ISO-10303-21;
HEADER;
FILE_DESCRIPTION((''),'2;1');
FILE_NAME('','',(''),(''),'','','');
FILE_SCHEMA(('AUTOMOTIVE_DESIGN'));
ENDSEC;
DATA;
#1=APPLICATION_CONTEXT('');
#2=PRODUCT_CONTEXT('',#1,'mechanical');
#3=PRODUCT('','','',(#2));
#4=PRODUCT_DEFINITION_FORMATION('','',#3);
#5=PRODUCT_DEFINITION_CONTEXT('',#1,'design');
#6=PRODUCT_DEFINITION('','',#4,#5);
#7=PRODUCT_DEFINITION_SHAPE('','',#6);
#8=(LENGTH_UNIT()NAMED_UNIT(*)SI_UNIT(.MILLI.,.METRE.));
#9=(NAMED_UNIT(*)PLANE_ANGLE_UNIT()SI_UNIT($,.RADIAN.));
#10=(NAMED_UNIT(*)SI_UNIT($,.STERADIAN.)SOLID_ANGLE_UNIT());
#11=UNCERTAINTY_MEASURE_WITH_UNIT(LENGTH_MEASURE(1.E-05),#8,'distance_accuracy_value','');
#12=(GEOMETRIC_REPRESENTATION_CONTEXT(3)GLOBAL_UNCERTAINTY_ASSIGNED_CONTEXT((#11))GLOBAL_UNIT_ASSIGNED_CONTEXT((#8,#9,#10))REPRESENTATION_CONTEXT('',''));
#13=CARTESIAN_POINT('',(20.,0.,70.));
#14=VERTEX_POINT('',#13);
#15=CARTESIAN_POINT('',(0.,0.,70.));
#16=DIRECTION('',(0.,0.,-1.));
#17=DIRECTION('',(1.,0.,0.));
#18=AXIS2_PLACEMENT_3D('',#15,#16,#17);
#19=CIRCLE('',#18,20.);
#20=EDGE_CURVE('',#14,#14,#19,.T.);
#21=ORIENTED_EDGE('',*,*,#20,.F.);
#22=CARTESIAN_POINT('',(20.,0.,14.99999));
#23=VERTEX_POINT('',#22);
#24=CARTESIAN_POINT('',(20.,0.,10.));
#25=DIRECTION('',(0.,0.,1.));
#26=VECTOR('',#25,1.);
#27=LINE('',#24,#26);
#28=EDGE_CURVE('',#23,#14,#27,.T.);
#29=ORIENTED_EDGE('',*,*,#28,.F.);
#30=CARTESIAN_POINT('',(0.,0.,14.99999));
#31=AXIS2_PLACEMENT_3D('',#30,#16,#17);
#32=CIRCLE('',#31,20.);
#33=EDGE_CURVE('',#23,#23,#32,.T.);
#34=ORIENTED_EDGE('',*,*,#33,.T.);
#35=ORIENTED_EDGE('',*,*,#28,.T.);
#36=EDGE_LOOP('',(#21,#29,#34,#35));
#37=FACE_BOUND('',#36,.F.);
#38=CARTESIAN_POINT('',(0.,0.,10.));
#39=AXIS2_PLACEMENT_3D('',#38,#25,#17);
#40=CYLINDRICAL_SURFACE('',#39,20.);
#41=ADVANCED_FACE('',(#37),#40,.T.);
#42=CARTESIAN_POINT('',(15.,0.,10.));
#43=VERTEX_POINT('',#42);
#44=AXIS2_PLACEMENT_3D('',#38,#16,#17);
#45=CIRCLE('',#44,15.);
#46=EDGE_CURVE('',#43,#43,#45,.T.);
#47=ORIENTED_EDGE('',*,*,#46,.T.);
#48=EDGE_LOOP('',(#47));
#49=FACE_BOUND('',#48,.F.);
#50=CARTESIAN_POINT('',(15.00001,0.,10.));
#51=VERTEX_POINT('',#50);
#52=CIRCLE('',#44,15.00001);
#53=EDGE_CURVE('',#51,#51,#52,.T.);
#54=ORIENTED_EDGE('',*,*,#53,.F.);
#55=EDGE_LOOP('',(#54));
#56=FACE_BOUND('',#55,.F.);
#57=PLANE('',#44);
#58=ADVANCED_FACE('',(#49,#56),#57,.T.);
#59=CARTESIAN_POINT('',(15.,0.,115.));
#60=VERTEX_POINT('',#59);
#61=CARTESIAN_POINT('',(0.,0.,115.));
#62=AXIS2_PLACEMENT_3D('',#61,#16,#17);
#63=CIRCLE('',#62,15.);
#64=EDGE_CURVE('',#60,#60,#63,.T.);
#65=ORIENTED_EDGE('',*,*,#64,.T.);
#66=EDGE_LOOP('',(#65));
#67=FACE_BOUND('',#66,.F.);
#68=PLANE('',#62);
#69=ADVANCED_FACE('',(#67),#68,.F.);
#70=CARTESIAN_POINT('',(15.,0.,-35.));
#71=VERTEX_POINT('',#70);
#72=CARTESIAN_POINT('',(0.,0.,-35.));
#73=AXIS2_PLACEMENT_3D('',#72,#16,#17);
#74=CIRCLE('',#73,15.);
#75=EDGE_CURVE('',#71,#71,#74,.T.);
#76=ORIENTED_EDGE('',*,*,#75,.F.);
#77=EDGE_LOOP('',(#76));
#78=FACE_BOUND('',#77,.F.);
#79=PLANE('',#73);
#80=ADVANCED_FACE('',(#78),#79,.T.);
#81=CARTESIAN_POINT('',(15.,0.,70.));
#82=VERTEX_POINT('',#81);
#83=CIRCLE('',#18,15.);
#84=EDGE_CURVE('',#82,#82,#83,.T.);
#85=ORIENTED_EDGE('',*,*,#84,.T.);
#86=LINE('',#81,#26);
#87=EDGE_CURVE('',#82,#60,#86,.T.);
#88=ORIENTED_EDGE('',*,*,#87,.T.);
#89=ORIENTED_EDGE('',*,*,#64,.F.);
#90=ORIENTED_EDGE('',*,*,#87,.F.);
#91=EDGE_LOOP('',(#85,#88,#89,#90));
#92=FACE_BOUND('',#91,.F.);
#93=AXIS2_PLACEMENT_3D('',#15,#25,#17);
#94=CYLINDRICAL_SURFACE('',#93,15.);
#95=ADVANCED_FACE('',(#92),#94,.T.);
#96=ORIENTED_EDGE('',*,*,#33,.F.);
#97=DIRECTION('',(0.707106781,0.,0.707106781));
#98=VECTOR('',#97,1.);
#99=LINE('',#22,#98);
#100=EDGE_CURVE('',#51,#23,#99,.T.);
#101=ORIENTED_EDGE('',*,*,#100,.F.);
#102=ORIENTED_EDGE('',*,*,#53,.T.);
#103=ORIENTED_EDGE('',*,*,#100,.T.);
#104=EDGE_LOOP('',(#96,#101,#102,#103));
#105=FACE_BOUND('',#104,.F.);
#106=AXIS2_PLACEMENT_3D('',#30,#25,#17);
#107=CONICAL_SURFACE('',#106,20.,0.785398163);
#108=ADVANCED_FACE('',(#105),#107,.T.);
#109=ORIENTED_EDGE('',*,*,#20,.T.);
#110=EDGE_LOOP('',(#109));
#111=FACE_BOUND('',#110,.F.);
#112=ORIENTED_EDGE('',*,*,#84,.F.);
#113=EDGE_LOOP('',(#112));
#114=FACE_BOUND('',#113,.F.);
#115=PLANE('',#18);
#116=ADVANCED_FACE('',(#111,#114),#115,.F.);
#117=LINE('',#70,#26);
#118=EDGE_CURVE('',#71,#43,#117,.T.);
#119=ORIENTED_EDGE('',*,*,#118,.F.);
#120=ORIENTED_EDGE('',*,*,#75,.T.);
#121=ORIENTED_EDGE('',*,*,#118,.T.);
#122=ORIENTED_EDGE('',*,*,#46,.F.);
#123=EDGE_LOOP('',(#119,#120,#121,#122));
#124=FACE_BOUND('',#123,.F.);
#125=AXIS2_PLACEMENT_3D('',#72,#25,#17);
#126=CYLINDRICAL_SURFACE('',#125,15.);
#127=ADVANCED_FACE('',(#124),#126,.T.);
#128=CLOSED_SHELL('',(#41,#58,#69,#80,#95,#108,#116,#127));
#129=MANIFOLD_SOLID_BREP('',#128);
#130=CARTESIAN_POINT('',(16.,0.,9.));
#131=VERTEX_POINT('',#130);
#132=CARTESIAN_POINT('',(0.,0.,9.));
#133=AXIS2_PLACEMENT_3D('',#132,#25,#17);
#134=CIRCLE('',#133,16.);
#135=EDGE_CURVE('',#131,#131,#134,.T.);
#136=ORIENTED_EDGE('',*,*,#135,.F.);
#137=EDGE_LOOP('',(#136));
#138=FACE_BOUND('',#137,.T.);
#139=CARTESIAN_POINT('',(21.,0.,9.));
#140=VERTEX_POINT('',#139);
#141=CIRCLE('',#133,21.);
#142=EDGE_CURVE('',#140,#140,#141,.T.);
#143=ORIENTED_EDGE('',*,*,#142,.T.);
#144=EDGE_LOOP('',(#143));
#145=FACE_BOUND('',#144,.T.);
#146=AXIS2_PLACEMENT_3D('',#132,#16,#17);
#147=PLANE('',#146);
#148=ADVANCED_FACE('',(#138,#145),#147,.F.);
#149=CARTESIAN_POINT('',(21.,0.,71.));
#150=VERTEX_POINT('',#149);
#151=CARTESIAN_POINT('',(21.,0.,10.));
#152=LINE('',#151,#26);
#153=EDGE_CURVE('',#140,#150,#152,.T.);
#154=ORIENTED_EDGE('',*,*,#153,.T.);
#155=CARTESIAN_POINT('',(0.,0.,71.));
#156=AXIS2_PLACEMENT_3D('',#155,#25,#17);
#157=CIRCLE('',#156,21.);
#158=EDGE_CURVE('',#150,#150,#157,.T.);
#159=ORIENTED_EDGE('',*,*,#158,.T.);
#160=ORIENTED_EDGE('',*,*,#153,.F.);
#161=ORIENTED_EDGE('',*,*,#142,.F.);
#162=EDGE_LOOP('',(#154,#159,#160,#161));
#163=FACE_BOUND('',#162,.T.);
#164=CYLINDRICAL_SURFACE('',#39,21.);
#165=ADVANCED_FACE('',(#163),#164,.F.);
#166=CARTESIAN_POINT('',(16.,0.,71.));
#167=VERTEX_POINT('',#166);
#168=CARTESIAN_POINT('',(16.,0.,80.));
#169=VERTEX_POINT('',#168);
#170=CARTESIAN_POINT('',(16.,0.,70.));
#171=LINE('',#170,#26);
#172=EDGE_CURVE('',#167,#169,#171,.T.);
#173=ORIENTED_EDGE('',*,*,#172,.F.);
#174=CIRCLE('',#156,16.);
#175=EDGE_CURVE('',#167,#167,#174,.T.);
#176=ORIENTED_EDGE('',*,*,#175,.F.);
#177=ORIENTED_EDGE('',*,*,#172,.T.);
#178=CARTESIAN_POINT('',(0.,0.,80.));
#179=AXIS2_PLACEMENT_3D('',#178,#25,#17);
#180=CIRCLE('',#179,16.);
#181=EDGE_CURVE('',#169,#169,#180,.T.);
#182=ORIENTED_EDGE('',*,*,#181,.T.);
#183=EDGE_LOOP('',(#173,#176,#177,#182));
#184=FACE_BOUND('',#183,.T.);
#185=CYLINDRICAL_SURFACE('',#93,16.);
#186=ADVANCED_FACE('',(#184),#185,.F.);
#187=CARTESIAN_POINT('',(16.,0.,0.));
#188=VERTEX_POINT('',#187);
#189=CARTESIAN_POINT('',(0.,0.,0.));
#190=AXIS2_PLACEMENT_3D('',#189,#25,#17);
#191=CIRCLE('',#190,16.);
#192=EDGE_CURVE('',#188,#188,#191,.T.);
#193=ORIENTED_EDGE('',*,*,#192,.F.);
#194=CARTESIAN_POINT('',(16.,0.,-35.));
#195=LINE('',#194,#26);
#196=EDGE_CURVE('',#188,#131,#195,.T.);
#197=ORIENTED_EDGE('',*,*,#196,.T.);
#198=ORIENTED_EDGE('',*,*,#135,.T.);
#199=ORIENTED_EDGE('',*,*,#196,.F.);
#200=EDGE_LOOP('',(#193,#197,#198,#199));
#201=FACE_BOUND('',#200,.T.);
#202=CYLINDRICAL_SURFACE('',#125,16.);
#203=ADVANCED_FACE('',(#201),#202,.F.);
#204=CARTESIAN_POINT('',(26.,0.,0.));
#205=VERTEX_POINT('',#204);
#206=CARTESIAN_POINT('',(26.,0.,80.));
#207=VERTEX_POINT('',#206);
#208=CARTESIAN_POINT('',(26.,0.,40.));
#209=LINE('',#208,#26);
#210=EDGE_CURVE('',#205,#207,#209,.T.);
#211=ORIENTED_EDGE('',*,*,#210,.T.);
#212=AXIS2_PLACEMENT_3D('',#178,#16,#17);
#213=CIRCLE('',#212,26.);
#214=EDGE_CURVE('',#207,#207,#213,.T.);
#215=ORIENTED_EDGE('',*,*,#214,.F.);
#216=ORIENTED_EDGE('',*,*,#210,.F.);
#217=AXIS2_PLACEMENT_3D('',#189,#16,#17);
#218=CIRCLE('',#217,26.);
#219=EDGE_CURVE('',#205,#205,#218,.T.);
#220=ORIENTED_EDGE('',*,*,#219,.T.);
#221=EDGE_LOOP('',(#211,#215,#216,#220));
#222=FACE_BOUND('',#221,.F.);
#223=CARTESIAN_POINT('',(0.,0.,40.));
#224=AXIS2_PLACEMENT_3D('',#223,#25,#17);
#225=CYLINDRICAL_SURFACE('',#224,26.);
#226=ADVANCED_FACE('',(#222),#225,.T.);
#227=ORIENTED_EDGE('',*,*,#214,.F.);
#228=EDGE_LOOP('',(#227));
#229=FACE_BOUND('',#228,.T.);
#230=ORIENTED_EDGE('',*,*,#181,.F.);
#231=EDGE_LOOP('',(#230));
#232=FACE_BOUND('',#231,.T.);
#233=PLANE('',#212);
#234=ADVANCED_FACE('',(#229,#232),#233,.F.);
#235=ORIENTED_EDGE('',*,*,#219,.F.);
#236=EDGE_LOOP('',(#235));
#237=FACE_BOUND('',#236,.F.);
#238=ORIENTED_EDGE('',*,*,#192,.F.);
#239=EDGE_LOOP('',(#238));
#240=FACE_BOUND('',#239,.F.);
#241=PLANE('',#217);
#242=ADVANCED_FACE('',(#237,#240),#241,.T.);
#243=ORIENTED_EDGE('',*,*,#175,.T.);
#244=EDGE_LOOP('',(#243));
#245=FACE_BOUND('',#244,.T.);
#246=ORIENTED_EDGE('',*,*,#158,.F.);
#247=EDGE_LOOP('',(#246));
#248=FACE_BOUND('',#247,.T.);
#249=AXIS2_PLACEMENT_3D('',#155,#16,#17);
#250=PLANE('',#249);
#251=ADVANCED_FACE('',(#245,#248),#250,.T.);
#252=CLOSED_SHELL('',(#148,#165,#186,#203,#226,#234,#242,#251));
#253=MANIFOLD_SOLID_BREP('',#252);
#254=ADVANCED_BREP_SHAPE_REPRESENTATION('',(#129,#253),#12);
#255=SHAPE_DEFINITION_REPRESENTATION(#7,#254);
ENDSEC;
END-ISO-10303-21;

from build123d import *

# Parameters (mm, degrees)
F0_W      = 26
F0_H      = 80
F1_W      = 15
F1_H      = 35
F4_OFFSET = 1
F5_SIZE   = 4.99999
F7_DEPTH  = 25


# Not quite as in the source:
# - a fillet or chamfer is up to 0.001 mm smaller than in the source, because OpenCascade refuses the exact size
# - a feature of the source that left no trace in its solid (it failed there, or was rolled back) is left out


with BuildPart() as f2:
    # F0 (on Front) → F2 (revolve)
    with BuildSketch(Plane.XZ):
        with Locations((13, 40)):
            Rectangle(F0_W, F0_H)
    revolve(axis=Axis((0, 0, 40), (0, 0, -1)))


with BuildPart() as f3:
    # F1 (on Front) → F3 (revolve)
    with BuildSketch(Plane.XZ):
        Polygon((0, 115), (0, 0), (15, 0), (15, 10), (20, 10), (20, 70), (15, 70), (15, 115), align=None)
        with Locations((7.5, -17.5)):
            Rectangle(F1_W, F1_H)
    revolve(axis=Axis((0, 0, 40), (0, 0, -1)))


with BuildPart() as f2_1:
    add(f2.part)

    # F4: cut F3, made larger all round first
    f4_tool = offset(f3.part, amount=F4_OFFSET, kind=Kind.INTERSECTION, mode=Mode.PRIVATE)
    add(f4_tool, mode=Mode.SUBTRACT)


with BuildPart() as f3_1:
    add(f3.part)

    # F5 (size 5 in the source; OpenCascade refuses exactly that, so slightly less here)
    f5_edges = [f3_1.edges().sort_by_distance(p)[0] for p in [
        (-20, 0, 10),
    ]]
    chamfer(f5_edges, length=F5_SIZE)


with BuildPart() as f7:
    # F6 (on face) → F7 (new body)
    with BuildSketch(Plane.XY.offset(115)):
        with BuildLine():
            ThreePointArc((15, 0), (0, -15), (-15, 0))
            Line((-15, 0), (-28.4320339561, 0))
            Line((-28.4320339561, 0), (-35, -125.1360130745))
            Line((-35, -125.1360130745), (-35, -130))
            Line((-35, -130), (-10, -130))
            Line((-10, -130), (-10, -120))
            Line((-10, -120), (10, -120))
            Line((10, -120), (10, -130))
            Line((10, -130), (35, -130))
            Line((35, -130), (35, -125.1360130745))
            Line((35, -125.1360130745), (28.4320339561, 0))
            Line((28.4320339561, 0), (15, 0))
        make_face()
        with BuildLine():
            Line((15, 0), (0, 0))
            Line((0, 0), (-15, 0))
            ThreePointArc((-15, 0), (0, -15), (15, 0))
        make_face()
    extrude(amount=-F7_DEPTH)


solid = Compound([f2_1.part, f3_1.part])
